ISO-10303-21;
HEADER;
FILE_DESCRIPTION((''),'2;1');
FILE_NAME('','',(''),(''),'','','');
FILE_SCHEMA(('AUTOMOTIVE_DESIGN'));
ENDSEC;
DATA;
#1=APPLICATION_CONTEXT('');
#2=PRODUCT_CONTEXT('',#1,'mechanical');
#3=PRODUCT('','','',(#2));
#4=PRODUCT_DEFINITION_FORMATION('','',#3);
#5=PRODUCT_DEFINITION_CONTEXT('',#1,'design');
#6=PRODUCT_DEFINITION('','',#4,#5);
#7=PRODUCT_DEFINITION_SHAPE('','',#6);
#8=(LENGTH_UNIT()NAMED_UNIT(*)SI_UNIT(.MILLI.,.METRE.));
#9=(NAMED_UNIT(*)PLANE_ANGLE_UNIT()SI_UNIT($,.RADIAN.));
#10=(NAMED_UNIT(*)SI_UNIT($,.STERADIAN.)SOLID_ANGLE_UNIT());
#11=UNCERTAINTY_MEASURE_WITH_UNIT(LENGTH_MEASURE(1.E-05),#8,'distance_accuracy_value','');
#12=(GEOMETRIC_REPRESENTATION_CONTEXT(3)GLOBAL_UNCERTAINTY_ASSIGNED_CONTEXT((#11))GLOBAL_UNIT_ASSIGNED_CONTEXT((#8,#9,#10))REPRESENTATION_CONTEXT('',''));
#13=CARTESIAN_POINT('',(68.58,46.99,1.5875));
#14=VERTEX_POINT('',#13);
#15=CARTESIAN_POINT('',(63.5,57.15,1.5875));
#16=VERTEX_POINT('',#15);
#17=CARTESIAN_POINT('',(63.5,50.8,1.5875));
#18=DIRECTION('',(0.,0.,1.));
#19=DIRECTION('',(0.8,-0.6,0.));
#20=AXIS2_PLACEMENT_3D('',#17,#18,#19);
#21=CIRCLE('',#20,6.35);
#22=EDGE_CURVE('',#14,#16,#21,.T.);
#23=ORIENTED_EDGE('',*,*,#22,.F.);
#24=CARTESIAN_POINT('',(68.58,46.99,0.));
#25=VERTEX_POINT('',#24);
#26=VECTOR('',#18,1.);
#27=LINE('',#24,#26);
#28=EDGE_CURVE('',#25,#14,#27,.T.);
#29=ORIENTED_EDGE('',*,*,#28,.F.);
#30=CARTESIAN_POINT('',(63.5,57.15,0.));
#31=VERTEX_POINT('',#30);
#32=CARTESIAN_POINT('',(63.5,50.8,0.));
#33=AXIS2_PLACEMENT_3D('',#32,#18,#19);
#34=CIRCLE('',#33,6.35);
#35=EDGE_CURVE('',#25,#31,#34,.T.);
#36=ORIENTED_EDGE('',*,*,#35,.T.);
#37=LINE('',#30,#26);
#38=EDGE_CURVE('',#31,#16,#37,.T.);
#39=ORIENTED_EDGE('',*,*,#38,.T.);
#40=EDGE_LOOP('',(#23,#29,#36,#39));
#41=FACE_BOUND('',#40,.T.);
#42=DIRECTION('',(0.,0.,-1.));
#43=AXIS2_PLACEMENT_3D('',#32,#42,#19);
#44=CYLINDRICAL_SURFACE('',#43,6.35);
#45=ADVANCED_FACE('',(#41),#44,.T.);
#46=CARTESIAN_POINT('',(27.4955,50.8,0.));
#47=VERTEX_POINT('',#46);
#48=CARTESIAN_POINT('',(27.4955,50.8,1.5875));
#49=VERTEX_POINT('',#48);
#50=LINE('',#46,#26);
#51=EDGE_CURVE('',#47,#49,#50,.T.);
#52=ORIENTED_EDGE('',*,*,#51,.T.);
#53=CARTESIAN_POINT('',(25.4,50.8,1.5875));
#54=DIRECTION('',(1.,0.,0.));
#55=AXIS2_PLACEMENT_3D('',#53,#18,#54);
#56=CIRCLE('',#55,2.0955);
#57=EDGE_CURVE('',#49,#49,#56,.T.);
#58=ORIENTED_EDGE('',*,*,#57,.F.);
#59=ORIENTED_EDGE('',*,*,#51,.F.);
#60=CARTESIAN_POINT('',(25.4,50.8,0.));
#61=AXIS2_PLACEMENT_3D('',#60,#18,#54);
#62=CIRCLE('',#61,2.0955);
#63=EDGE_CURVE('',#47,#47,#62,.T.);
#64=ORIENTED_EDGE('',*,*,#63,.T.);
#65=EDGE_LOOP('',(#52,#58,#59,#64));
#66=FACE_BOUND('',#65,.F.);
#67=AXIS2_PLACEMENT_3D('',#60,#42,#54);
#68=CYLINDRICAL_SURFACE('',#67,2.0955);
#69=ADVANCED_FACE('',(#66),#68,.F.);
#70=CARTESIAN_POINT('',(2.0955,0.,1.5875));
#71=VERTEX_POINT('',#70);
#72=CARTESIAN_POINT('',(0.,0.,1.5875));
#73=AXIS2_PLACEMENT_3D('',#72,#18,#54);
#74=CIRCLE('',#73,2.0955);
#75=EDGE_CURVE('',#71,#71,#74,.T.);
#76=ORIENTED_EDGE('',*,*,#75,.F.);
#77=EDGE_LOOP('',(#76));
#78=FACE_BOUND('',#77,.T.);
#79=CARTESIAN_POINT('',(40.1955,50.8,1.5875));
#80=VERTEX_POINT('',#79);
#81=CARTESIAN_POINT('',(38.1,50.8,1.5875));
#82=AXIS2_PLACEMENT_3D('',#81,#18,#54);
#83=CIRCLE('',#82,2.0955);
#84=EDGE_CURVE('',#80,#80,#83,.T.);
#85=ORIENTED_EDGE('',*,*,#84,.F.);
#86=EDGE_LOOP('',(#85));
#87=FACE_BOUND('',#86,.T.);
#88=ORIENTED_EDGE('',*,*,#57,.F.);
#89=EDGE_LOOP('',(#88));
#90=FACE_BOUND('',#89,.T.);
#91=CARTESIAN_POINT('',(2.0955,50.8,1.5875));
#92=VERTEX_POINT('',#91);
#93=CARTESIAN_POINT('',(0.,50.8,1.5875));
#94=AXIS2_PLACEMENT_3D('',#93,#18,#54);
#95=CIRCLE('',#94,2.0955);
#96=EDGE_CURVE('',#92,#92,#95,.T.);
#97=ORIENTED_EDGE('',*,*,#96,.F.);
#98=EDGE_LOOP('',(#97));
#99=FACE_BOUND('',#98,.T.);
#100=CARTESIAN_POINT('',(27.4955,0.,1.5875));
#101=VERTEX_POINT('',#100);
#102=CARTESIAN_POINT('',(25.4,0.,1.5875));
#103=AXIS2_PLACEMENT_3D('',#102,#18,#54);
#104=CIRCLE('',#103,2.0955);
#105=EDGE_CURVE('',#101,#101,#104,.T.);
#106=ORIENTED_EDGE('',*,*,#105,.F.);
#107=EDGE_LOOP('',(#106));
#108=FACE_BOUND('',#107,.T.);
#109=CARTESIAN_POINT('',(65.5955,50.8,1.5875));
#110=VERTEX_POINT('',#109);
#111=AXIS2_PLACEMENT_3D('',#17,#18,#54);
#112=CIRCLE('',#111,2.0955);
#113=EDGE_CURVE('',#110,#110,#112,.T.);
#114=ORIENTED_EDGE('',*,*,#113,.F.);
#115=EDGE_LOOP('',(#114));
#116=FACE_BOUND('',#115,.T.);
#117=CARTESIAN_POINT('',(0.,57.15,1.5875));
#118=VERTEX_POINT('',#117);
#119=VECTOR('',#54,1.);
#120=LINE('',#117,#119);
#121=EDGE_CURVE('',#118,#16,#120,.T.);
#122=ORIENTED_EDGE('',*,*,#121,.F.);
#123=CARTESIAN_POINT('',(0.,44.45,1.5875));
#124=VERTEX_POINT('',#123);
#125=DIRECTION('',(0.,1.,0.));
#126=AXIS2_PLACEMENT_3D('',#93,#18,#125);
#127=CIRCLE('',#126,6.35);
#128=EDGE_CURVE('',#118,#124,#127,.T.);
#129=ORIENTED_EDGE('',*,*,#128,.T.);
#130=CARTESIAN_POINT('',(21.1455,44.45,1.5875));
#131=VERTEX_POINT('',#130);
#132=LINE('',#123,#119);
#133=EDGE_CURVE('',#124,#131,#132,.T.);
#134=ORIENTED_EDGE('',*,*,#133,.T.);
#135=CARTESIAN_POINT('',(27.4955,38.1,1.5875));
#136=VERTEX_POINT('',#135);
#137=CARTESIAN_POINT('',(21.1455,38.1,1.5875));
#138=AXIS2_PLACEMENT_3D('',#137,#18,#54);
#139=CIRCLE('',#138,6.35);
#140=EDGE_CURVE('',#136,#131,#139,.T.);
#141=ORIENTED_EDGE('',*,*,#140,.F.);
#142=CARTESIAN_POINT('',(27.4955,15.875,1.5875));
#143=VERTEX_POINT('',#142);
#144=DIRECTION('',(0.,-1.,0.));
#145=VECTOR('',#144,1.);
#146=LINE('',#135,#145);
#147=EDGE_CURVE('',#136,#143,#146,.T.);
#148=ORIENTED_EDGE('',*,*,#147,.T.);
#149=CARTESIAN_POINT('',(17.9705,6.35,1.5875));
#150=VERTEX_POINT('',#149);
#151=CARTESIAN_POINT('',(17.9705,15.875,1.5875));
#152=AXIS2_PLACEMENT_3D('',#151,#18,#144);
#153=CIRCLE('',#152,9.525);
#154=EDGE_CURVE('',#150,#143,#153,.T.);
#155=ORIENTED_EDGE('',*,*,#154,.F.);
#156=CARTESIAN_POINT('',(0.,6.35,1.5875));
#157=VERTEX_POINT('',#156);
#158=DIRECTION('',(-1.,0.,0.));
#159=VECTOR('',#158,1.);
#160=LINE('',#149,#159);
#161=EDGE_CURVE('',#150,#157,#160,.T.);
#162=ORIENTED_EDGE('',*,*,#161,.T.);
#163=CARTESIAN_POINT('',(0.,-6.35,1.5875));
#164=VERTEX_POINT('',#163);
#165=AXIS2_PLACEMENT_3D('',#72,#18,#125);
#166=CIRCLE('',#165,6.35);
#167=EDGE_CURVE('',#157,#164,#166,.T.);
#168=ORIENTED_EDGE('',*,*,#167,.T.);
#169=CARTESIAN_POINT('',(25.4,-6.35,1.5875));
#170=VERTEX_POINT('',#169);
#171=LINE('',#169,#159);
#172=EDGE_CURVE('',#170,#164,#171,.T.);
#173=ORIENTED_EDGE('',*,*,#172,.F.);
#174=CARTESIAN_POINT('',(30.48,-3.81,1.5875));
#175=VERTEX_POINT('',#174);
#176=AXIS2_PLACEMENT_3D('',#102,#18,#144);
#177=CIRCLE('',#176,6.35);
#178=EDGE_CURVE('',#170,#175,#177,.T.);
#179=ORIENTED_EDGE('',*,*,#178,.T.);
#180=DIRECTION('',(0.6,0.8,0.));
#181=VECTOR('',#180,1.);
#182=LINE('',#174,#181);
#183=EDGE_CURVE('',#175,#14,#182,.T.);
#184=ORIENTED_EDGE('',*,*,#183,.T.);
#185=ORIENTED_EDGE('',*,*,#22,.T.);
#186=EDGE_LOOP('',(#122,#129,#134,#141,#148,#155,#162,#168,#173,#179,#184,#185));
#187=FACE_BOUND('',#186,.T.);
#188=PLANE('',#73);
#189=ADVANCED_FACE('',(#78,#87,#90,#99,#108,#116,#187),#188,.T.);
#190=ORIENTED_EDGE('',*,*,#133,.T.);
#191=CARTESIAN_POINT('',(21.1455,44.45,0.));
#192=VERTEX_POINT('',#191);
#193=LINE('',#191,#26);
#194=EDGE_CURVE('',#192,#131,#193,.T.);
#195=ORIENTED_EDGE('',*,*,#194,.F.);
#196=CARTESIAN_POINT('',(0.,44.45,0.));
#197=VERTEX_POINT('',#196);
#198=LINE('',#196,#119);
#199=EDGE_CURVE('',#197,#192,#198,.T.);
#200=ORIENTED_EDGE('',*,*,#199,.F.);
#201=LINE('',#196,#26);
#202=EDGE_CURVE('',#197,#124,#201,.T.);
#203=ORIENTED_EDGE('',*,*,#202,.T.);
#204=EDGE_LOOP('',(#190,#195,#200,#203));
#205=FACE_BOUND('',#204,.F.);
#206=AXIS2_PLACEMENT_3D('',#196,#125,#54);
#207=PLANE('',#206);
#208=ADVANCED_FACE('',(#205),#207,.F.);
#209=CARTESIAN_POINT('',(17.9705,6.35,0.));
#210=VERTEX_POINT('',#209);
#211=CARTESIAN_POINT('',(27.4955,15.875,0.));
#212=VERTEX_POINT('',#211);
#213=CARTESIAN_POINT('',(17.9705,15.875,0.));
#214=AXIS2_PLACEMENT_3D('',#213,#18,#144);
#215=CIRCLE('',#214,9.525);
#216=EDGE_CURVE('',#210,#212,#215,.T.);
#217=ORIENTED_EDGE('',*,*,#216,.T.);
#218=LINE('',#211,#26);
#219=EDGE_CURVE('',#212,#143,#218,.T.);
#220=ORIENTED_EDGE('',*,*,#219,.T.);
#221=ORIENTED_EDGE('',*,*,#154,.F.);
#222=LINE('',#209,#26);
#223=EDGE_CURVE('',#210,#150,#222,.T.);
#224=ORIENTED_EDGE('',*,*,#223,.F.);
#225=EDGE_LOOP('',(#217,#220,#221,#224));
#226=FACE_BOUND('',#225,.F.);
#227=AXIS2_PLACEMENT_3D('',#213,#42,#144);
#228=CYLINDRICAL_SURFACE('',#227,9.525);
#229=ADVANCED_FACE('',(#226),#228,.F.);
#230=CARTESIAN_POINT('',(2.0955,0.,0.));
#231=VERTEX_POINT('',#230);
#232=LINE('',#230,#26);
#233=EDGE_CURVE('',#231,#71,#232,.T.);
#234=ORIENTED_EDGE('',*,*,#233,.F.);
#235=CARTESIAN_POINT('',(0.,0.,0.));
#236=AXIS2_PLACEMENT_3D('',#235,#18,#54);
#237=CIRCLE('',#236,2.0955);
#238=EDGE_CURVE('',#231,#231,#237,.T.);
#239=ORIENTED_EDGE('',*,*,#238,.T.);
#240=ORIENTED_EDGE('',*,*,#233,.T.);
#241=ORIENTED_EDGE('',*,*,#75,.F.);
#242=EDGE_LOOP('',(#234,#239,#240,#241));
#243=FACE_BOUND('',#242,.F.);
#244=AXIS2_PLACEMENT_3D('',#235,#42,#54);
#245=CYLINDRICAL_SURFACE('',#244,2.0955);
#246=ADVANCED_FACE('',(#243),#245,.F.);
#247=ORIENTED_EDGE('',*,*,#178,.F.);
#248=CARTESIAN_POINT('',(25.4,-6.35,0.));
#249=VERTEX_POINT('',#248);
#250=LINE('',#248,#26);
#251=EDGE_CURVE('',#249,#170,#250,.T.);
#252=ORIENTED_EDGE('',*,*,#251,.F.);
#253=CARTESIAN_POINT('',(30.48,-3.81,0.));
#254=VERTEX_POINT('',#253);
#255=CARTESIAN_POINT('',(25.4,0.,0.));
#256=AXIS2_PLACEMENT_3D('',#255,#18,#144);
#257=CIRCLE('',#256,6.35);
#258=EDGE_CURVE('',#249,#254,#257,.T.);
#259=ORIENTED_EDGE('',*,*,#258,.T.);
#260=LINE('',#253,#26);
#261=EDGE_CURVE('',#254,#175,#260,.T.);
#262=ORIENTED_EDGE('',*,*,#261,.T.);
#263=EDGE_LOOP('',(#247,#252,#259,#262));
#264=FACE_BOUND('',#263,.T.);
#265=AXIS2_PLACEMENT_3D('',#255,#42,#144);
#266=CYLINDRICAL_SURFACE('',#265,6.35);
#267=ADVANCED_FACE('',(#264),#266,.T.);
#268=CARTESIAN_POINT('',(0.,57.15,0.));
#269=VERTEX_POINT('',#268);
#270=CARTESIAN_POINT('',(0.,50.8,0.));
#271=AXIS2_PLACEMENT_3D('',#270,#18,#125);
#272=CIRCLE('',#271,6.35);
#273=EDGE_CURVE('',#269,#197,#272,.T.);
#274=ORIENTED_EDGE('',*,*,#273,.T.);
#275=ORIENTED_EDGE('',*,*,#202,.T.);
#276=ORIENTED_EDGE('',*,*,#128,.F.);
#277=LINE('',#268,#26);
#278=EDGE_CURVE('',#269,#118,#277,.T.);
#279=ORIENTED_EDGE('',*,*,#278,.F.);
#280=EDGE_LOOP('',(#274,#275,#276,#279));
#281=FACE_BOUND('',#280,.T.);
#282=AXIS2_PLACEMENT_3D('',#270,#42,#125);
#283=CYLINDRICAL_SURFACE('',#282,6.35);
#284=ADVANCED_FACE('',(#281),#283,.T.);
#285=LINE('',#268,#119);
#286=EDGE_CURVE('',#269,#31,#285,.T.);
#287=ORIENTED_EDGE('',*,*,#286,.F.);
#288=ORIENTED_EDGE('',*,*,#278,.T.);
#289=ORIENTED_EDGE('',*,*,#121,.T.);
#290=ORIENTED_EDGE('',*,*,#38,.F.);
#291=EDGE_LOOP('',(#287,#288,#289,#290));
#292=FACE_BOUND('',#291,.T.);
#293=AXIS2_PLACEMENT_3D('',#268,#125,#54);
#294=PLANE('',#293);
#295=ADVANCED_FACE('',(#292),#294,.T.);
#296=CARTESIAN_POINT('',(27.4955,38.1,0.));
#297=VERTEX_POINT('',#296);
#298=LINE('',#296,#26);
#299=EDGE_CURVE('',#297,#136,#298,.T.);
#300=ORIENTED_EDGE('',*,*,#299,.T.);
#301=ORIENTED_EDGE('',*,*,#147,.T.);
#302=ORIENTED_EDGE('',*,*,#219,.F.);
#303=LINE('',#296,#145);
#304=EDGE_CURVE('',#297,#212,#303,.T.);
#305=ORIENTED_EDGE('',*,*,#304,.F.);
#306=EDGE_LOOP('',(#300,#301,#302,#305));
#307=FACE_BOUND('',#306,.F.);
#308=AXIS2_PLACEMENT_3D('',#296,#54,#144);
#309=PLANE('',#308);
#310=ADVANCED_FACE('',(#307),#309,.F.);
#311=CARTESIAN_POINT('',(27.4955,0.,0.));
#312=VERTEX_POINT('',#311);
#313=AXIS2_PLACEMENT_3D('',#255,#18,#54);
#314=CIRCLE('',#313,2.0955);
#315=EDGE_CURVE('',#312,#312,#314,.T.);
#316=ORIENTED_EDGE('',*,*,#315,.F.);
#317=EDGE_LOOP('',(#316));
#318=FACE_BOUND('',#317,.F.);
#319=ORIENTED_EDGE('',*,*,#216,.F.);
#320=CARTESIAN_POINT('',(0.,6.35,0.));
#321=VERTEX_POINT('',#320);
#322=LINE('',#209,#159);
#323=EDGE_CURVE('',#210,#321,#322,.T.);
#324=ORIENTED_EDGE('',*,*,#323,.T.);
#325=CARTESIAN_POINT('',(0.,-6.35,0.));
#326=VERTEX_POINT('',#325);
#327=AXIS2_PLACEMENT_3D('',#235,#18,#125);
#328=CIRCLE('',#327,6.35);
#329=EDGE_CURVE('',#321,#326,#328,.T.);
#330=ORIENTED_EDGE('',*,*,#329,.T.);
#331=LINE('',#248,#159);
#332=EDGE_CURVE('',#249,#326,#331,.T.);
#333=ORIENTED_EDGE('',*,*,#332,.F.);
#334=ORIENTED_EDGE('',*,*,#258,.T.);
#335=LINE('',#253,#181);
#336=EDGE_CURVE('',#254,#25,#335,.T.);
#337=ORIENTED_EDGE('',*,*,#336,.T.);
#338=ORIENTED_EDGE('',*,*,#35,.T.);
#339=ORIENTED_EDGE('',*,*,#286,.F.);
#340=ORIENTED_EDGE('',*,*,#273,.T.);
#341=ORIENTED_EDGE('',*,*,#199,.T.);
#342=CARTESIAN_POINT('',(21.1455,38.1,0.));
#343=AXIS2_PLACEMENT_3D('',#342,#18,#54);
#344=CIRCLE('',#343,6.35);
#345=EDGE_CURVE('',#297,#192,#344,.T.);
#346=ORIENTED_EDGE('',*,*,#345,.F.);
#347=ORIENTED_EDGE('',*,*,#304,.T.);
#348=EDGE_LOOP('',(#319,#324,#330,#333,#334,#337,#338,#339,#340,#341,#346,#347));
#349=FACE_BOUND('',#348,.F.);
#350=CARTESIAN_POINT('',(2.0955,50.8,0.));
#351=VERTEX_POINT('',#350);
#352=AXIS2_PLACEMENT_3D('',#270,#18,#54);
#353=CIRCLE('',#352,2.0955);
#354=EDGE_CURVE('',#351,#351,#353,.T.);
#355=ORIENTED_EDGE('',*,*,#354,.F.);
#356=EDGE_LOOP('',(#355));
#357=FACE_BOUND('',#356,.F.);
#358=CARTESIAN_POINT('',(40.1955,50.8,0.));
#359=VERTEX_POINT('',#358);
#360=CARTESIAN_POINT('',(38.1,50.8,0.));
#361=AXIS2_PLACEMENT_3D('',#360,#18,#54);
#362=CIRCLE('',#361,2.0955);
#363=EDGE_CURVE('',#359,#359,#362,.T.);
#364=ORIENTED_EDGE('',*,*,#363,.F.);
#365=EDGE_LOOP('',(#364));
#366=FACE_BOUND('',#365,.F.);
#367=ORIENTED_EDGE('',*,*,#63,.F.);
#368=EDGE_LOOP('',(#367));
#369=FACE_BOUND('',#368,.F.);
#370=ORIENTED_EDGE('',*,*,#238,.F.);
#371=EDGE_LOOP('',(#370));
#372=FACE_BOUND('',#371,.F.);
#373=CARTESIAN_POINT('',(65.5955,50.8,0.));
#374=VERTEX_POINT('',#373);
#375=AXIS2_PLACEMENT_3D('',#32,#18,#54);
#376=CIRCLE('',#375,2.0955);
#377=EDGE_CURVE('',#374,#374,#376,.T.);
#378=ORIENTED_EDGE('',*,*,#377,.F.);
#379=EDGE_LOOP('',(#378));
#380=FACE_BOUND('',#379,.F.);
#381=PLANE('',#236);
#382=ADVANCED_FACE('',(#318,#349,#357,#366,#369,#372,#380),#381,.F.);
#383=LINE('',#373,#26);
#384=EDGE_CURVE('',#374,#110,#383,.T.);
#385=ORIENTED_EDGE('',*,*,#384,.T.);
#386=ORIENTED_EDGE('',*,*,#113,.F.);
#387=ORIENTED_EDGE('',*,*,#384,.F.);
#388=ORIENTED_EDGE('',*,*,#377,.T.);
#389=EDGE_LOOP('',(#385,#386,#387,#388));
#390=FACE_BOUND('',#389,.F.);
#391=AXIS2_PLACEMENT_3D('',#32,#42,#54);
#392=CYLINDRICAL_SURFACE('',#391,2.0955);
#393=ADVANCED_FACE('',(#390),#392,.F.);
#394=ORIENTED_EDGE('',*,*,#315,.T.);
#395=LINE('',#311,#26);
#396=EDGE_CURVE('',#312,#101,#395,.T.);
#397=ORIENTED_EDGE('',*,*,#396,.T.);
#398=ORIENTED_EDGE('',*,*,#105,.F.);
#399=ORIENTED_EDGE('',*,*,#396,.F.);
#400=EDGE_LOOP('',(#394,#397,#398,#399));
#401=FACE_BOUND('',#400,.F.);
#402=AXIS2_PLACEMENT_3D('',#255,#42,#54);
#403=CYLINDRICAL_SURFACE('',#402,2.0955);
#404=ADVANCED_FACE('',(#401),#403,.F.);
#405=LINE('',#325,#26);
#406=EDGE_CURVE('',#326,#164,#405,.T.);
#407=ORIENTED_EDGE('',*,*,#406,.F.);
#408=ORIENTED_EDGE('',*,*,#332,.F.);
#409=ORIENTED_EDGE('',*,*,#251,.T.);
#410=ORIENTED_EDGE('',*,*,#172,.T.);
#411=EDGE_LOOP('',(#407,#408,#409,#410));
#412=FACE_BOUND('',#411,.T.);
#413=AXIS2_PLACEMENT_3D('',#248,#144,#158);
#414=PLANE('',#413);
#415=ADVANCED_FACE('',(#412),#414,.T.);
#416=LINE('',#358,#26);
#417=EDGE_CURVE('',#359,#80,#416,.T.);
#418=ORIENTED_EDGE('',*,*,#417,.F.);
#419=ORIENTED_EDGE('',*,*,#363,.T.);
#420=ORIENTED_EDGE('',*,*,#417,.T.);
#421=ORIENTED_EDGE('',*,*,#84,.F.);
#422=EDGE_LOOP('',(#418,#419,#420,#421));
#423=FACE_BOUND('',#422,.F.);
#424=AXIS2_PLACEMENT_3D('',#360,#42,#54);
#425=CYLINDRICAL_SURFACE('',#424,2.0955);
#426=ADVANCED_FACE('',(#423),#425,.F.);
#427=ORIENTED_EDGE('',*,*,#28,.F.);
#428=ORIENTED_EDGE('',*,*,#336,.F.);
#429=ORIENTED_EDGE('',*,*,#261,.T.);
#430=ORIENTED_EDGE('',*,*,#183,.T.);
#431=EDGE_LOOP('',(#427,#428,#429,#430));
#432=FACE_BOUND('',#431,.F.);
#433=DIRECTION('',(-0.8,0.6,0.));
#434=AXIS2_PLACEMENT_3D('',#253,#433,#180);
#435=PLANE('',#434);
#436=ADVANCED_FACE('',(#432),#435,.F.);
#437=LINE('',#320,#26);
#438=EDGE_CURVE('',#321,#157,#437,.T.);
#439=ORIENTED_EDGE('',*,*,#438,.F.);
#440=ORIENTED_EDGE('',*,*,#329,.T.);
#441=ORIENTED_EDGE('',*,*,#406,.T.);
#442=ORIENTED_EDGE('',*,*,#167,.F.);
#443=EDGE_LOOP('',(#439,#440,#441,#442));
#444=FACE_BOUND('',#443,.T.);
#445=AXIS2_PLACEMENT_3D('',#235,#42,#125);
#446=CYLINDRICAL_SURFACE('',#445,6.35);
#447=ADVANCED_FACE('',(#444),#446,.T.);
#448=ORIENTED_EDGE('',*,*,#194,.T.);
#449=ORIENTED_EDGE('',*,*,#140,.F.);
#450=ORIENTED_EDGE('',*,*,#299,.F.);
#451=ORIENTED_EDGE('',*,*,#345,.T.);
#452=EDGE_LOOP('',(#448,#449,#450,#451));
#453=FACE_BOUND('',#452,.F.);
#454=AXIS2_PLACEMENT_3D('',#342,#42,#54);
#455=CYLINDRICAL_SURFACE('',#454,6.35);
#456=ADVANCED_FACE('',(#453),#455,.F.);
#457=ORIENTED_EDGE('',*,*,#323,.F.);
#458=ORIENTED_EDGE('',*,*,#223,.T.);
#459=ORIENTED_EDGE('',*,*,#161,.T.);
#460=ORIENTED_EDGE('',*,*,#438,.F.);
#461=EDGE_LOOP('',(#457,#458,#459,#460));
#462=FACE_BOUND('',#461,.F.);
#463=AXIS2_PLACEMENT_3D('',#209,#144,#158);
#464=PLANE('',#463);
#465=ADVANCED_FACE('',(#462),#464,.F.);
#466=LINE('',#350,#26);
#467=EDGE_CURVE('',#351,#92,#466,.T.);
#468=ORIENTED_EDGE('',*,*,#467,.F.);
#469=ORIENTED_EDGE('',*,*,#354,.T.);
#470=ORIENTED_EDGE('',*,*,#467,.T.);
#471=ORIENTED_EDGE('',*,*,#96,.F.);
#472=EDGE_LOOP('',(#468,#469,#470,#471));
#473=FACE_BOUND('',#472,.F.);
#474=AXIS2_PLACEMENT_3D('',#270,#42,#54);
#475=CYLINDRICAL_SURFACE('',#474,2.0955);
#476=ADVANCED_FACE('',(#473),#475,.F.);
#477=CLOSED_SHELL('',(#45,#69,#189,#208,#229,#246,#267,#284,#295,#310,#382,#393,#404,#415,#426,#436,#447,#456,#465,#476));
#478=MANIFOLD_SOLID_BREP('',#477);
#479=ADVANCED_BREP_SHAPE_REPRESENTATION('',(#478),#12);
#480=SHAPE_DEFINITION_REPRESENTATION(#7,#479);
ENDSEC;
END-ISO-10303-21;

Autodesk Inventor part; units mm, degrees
ref_plane "YZ Plane" through (0, 0, 0) normal (1, 0, 0) x (0, 1, 0)
ref_plane "XZ Plane" through (0, 0, 0) normal (0, 1, 0) x (-1, 0, 0)
ref_plane "XY Plane" through (0, 0, 0) normal (0, 0, 1) x (1, 0, 0)
sketch "main" plane through (0, 0, 0) normal (0, 0, 1) x (1, 0, 0)
  circle A0 centre (-8.7196, -23.7408) radius 2.0955
  circle A1 centre (-34.1196, -23.7408) radius 2.0955
  arc A2 (-34.1196, -17.3908) -> (-34.1196, -30.0908) centre (-34.1196, -23.7408) ccw
  arc A3 (-16.1491, -17.3908) -> (-6.6241, -7.8658) centre (-16.1491, -7.8658) ccw
  arc A4 (-8.7196, -30.0908) -> (-3.6396, -27.5508) centre (-8.7196, -23.7408) ccw
  line L0 (-16.1491, -17.3908) -> (-34.1196, -17.3908)
  line L1 (-8.7196, -30.0908) -> (-34.1196, -30.0908)
  circle A5 centre (-8.7196, 27.0592) radius 2.0955
  circle A6 centre (-34.1196, 27.0592) radius 2.0955
  arc A7 (-34.1196, 33.4092) -> (-34.1196, 20.7092) centre (-34.1196, 27.0592) ccw
  line L2 (-6.6241, 14.3592) -> (-6.6241, -7.8658)
  line L3 (-34.1196, 20.7092) -> (-12.9741, 20.7092)
  arc A8 (-6.6241, 14.3592) -> (-12.9741, 20.7092) centre (-12.9741, 14.3592) ccw
  line L4 (-3.6396, -27.5508) -> (34.4604, 23.2492)
  line L5 (-34.1196, 33.4092) -> (29.3804, 33.4092)
  line L6 (-6.6241, 20.7092) -> (15.6009, 20.7092) construction
  circle A9 centre (3.9804, 27.0592) radius 2.0955
  circle A10 centre (29.3804, 27.0592) radius 2.0955
  arc A11 (34.4604, 23.2492) -> (29.3804, 33.4092) centre (29.3804, 27.0592) ccw
  point P0 (-9.3122, 5.0882)
  dimension "d0" = 4.191
  dimension "d1" = 4.191
  dimension "d2" = 4.191
  dimension "d3" = 4.191
  dimension "d4" = 9.525
  dimension "d5" = 6.35
sketch "Sketch1" plane through (0, 0, 0) normal (0, 0, 1) x (1, 0, 0)
  circle A0 centre (25.4, 0) radius 2.0955
  circle A1 centre (0, 0) radius 2.0955
  arc A2 (0, 6.35) -> (0, -6.35) centre (0, 0) ccw
  arc A3 (17.9705, 6.35) -> (27.4955, 15.875) centre (17.9705, 15.875) ccw
  arc A4 (25.4, -6.35) -> (30.48, -3.81) centre (25.4, 0) ccw
  line L0 (17.9705, 6.35) -> (0, 6.35)
  line L1 (25.4, -6.35) -> (0, -6.35)
  circle A5 centre (25.4, 50.8) radius 2.0955
  circle A6 centre (0, 50.8) radius 2.0955
  arc A7 (0, 57.15) -> (0, 44.45) centre (0, 50.8) ccw
  line L2 (27.4955, 38.1) -> (27.4955, 15.875)
  line L3 (0, 44.45) -> (21.1455, 44.45)
  arc A8 (27.4955, 38.1) -> (21.1455, 44.45) centre (21.1455, 38.1) ccw
  line L4 (30.48, -3.81) -> (68.58, 46.99)
  line L5 (0, 57.15) -> (63.5, 57.15)
  line L6 (27.4955, 44.45) -> (49.7205, 44.45) construction
  circle A9 centre (38.1, 50.8) radius 2.0955
  circle A10 centre (63.5, 50.8) radius 2.0955
  arc A11 (68.58, 46.99) -> (63.5, 57.15) centre (63.5, 50.8) ccw
extrude "Extrusion1" add sketch "Sketch1" along normal blind 1.5875
properties part number "gusset" material "Acetal Resin, White"
